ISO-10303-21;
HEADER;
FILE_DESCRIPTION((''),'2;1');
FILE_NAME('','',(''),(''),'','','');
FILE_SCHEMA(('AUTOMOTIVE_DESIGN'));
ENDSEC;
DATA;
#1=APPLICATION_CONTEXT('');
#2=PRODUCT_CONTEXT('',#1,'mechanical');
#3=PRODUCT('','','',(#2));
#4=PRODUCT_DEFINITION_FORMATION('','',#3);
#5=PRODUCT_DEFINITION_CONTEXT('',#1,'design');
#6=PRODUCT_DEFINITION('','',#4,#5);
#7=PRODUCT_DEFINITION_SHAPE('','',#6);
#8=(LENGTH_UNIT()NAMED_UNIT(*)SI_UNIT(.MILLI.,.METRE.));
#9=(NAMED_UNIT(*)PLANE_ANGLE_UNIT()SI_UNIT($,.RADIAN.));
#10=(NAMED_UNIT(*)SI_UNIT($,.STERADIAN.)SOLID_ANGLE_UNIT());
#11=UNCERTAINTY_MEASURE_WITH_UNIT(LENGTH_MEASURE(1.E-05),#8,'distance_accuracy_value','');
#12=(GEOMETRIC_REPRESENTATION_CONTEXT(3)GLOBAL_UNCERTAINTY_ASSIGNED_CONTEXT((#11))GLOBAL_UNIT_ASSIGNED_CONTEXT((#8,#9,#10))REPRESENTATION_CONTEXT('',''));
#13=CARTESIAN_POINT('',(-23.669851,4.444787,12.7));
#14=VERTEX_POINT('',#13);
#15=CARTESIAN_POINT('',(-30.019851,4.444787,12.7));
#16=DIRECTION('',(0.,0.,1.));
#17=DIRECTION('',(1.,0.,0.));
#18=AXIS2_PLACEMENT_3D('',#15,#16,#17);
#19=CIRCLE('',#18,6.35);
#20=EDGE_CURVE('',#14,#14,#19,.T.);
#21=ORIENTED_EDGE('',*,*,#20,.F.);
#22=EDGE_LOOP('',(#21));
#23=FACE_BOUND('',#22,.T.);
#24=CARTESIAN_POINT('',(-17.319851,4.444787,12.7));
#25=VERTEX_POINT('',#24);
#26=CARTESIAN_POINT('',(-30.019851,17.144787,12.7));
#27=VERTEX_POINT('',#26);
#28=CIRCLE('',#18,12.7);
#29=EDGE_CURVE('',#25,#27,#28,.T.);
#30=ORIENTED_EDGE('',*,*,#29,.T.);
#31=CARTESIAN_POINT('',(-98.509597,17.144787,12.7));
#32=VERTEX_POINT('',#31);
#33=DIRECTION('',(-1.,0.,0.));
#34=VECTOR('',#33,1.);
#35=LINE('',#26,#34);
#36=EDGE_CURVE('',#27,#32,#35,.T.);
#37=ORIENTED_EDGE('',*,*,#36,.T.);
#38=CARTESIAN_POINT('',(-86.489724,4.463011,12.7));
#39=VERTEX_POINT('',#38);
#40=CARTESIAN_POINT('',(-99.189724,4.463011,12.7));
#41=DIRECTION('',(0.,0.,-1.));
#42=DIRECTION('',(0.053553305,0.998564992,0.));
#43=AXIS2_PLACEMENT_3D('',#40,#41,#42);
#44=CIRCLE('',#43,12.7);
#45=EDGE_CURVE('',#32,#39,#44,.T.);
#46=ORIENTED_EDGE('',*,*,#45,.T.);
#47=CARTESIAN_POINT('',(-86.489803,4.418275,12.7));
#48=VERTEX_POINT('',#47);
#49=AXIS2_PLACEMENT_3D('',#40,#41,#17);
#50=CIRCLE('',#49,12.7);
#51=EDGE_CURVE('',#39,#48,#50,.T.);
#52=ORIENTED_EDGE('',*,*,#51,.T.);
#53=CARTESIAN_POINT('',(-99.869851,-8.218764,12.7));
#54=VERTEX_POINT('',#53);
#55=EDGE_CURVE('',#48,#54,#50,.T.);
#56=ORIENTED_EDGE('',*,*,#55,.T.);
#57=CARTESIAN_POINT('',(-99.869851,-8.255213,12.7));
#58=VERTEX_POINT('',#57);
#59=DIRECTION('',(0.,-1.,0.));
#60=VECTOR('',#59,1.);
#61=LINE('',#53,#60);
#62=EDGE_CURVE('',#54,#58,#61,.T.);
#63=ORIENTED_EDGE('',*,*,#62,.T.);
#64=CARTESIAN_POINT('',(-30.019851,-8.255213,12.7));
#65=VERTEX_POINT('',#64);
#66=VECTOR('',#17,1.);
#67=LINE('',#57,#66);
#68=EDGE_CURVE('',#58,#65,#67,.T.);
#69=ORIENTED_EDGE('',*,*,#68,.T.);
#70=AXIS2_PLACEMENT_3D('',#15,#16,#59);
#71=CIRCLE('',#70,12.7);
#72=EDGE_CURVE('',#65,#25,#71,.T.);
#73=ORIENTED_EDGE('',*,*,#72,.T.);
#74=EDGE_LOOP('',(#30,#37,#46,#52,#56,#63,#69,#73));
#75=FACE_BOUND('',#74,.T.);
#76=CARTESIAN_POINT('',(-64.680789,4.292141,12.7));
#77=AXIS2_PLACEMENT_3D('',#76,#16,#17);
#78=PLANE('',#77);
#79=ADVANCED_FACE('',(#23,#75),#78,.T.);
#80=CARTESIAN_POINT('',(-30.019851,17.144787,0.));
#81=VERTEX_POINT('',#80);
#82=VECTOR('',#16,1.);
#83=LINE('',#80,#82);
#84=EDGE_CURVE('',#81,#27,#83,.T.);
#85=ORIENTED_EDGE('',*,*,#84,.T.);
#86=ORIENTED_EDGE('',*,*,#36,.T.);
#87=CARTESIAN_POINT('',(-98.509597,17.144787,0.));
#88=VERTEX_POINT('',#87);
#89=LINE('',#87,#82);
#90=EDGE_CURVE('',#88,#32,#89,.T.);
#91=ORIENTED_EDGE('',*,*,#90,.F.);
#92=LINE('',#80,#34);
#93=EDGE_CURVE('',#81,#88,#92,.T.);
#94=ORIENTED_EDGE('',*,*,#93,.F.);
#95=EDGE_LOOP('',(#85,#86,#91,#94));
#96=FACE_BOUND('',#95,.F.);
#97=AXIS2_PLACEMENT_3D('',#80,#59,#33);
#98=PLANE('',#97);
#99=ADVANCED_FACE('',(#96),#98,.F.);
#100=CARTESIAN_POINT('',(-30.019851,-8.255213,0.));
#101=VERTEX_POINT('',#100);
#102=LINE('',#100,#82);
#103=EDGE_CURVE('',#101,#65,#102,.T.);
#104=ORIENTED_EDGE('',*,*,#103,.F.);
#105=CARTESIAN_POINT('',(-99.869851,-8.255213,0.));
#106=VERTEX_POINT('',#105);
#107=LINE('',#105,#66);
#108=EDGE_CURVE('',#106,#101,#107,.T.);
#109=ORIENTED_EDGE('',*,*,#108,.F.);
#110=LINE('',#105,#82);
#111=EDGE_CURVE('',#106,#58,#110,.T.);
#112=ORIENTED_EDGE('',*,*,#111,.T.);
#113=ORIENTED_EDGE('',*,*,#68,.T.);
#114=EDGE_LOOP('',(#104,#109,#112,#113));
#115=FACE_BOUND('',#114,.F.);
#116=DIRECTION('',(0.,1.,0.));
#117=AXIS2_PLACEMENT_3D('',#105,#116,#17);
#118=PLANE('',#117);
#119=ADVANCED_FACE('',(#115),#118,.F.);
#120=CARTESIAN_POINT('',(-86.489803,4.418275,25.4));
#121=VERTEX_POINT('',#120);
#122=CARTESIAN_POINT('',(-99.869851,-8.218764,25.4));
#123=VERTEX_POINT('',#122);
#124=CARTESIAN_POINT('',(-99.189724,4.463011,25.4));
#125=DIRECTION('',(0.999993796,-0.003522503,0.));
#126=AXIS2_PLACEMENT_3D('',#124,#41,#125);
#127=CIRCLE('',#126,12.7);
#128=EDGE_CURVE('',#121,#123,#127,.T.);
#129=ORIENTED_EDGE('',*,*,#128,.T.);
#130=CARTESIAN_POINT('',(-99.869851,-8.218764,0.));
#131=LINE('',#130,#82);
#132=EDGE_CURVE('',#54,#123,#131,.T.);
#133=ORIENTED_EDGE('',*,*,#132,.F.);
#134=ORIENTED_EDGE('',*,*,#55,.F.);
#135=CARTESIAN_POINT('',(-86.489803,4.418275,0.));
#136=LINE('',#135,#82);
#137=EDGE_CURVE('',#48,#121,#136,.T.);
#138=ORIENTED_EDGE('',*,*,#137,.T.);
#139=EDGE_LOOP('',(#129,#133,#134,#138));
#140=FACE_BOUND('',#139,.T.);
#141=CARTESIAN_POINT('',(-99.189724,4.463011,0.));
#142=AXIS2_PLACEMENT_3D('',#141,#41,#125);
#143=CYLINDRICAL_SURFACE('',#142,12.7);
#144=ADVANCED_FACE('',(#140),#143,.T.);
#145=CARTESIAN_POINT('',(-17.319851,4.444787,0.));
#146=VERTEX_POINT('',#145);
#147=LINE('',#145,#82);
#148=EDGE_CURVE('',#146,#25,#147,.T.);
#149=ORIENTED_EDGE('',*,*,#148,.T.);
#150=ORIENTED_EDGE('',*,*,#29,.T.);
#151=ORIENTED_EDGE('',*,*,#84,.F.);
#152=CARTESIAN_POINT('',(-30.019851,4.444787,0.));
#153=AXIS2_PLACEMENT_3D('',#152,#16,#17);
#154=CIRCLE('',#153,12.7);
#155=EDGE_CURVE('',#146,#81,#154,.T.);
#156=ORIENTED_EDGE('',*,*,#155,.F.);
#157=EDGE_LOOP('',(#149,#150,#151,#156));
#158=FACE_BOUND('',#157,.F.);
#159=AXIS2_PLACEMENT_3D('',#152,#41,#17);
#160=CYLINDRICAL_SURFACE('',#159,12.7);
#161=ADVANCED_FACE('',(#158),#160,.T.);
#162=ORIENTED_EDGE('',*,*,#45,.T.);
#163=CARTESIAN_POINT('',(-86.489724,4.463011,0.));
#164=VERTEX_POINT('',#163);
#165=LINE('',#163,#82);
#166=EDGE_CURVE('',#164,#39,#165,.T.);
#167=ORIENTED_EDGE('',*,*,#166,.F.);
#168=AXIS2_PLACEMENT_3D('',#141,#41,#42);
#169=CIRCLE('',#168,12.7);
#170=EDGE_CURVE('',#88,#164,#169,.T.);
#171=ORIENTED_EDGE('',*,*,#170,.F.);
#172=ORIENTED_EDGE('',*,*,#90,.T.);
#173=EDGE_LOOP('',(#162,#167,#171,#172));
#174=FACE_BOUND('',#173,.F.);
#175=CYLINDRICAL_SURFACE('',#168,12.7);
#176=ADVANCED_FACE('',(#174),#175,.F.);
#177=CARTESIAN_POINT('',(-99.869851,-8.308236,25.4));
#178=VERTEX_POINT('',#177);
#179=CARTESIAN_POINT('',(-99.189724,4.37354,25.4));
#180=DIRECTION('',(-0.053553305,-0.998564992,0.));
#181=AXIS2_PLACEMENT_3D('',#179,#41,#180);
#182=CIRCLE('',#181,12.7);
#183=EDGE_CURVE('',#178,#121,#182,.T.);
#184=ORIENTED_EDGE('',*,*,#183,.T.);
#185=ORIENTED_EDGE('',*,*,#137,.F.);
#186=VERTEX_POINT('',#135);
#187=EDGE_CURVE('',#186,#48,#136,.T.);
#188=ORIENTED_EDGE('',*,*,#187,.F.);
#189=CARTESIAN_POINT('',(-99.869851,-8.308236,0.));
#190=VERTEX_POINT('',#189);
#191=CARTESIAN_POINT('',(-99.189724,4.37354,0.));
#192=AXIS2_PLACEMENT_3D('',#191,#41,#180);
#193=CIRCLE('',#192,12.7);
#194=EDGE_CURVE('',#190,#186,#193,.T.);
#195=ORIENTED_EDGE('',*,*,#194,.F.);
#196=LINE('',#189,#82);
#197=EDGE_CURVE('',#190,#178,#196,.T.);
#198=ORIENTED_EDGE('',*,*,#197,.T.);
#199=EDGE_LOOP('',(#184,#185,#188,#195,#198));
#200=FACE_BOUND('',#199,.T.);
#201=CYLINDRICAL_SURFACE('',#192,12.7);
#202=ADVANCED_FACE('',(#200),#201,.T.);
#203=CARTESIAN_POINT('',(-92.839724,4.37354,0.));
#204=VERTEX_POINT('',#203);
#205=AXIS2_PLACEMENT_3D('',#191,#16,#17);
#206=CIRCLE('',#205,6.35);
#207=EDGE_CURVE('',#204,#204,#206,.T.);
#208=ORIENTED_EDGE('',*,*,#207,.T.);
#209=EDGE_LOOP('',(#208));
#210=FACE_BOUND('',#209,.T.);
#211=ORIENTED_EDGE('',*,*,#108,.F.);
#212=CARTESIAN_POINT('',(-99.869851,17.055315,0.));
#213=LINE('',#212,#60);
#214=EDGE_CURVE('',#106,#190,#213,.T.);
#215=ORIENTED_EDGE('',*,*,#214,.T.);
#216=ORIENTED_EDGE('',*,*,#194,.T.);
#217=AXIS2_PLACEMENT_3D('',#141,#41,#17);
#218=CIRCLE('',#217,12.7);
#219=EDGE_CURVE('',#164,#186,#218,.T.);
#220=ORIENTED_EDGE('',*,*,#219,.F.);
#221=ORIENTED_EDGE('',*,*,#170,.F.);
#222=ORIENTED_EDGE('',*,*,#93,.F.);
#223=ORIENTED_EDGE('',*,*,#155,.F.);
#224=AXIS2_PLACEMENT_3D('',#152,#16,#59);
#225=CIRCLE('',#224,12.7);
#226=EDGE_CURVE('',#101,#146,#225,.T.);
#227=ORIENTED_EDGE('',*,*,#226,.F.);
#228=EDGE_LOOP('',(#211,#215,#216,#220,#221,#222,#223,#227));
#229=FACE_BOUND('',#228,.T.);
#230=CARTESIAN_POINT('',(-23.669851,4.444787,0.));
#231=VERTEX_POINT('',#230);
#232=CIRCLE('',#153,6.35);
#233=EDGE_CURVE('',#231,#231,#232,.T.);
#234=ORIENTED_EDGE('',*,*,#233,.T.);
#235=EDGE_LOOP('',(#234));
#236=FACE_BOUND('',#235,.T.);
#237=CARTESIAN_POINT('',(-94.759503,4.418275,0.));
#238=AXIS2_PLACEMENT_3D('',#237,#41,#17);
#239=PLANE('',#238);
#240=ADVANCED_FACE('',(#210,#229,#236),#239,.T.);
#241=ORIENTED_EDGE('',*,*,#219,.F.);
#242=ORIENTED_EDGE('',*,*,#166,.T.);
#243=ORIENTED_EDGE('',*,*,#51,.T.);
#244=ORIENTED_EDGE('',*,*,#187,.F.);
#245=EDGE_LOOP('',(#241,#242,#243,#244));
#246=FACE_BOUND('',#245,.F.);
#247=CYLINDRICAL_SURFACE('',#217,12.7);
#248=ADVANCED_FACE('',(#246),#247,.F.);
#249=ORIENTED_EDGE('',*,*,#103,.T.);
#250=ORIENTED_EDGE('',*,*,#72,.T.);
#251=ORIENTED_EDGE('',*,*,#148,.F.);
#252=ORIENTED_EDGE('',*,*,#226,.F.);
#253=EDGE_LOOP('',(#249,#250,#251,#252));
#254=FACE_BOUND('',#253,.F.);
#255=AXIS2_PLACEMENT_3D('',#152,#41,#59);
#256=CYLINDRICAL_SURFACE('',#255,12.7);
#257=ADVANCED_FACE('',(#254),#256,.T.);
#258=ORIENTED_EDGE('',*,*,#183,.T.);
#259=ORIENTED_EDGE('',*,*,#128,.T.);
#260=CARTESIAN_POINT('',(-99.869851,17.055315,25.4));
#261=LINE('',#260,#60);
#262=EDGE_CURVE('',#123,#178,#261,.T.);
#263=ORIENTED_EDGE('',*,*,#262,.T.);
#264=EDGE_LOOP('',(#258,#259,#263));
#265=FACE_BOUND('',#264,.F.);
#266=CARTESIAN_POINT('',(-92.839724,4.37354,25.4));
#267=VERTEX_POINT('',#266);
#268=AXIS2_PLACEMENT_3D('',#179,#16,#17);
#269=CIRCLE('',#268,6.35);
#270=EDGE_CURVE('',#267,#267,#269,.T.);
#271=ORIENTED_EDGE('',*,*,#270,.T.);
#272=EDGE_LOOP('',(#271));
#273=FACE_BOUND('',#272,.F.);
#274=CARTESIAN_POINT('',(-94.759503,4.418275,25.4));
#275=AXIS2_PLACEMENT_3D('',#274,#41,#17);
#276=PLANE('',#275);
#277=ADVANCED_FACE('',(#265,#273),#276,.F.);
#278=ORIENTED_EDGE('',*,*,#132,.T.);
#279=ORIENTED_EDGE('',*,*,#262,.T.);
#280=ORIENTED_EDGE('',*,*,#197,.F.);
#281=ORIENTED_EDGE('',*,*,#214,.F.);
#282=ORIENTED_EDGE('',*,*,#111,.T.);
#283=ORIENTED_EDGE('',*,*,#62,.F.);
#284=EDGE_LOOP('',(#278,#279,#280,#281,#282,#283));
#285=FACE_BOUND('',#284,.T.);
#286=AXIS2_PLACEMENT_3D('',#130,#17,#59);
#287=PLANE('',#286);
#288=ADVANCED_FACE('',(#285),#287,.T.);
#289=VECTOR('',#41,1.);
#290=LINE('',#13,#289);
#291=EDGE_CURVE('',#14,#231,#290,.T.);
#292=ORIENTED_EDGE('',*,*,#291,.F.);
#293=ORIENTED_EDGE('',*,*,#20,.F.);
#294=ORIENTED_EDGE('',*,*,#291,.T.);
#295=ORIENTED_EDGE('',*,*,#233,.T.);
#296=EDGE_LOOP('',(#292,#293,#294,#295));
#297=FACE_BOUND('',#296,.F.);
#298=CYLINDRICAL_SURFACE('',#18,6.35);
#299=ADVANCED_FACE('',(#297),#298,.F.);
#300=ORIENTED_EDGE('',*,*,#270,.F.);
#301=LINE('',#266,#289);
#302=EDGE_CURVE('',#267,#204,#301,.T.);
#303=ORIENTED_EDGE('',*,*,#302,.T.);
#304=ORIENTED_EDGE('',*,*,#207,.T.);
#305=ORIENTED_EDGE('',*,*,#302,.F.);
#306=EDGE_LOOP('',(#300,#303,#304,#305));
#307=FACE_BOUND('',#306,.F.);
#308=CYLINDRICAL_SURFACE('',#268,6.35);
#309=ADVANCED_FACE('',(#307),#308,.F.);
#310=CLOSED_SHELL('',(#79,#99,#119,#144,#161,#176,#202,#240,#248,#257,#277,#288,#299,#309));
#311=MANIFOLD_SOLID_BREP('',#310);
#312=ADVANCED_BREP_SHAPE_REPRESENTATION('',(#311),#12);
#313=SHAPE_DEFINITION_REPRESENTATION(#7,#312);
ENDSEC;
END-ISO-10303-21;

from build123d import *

# Parameters (mm, degrees)
F1_DEPTH = 12.7
F3_DEPTH = 25.4
F4_R     = 6.35
F5_DEPTH = 25.4
F6_R     = 6.35
F7_DEPTH = 12.7


with BuildPart() as f1:
    # F0 (on Top) → F1 (new body)
    with BuildSketch(Plane.XY):
        with BuildLine():
            ThreePointArc((-98.5095974419, 17.1447865009), (-89.9721430512, 13.1994974474), (-86.4897244217, 4.4630111011))
            ThreePointArc((-86.4897244217, 4.4630111011), (-90.4532380754, -4.7545702694), (-99.8698514014, -8.2187642987))
            Line((-99.8698514014, -8.2187642987), (-99.8698514014, -8.2552134991))
            Line((-99.8698514014, -8.2552134991), (-30.0198514014, -8.2552134991))
            ThreePointArc((-30.0198514014, -8.2552134991), (-42.7198514014, 4.4447865009), (-30.0198514014, 17.1447865009))
            Line((-30.0198514014, 17.1447865009), (-98.5095974419, 17.1447865009))
        make_face()
        with BuildLine():
            ThreePointArc((-17.3198514014, 4.4447865009), (-21.0395952804, 13.425042622), (-30.0198514014, 17.1447865009))
            Line((-30.0198514014, 17.1447865009), (-30.0198514014, -8.2552134991))
            ThreePointArc((-30.0198514014, -8.2552134991), (-21.0395952804, -4.5354696201), (-17.3198514014, 4.4447865009))
        make_face()
        with BuildLine():
            Line((-30.0198514014, -8.2552134991), (-30.0198514014, 17.1447865009))
            ThreePointArc((-30.0198514014, 17.1447865009), (-42.7198514014, 4.4447865009), (-30.0198514014, -8.2552134991))
        make_face()
    extrude(amount=F1_DEPTH)

    # F2 (on face) → F3 (join)
    with BuildSketch(Plane(origin=(0, 0, 0), x_dir=(1, 0, 0), z_dir=(0, 0, -1))):
        with BuildLine():
            ThreePointArc((-99.8698514014, -17.0553149368), (-90.4694861278, -13.6064937824), (-86.4898032129, -4.418275319))
            ThreePointArc((-86.4898032129, -4.418275319), (-90.4694861278, 4.7699431443), (-99.8698514014, 8.2187642987))
            Line((-99.8698514014, 8.2187642987), (-99.8698514014, -17.0553149368))
        make_face()
        with BuildLine():
            Line((-99.8698514014, 8.2187642987), (-99.8698514014, 8.2552134991))
            Line((-99.8698514014, 8.2552134991), (-99.8698514014, 8.3082358629))
            ThreePointArc((-99.8698514014, 8.3082358629), (-111.8897244217, -4.373539537), (-99.8698514014, -17.0553149368))
            Line((-99.8698514014, -17.0553149368), (-99.8698514014, 8.2187642987))
        make_face()
    extrude(amount=-F3_DEPTH)

    # F4 (on face) → F5 (cut)
    with BuildSketch(Plane.XY.offset(25.4)):
        with Locations((-99.1897244217, 4.373539537)):
            Circle(F4_R)
    extrude(amount=-F5_DEPTH, mode=Mode.SUBTRACT)

    # F6 (on face) → F7 (cut)
    with BuildSketch(Plane.XY.offset(12.7)):
        with Locations((-30.0198514014, 4.4447865009)):
            Circle(F6_R)
    extrude(amount=-F7_DEPTH, mode=Mode.SUBTRACT)


solid = f1.part
